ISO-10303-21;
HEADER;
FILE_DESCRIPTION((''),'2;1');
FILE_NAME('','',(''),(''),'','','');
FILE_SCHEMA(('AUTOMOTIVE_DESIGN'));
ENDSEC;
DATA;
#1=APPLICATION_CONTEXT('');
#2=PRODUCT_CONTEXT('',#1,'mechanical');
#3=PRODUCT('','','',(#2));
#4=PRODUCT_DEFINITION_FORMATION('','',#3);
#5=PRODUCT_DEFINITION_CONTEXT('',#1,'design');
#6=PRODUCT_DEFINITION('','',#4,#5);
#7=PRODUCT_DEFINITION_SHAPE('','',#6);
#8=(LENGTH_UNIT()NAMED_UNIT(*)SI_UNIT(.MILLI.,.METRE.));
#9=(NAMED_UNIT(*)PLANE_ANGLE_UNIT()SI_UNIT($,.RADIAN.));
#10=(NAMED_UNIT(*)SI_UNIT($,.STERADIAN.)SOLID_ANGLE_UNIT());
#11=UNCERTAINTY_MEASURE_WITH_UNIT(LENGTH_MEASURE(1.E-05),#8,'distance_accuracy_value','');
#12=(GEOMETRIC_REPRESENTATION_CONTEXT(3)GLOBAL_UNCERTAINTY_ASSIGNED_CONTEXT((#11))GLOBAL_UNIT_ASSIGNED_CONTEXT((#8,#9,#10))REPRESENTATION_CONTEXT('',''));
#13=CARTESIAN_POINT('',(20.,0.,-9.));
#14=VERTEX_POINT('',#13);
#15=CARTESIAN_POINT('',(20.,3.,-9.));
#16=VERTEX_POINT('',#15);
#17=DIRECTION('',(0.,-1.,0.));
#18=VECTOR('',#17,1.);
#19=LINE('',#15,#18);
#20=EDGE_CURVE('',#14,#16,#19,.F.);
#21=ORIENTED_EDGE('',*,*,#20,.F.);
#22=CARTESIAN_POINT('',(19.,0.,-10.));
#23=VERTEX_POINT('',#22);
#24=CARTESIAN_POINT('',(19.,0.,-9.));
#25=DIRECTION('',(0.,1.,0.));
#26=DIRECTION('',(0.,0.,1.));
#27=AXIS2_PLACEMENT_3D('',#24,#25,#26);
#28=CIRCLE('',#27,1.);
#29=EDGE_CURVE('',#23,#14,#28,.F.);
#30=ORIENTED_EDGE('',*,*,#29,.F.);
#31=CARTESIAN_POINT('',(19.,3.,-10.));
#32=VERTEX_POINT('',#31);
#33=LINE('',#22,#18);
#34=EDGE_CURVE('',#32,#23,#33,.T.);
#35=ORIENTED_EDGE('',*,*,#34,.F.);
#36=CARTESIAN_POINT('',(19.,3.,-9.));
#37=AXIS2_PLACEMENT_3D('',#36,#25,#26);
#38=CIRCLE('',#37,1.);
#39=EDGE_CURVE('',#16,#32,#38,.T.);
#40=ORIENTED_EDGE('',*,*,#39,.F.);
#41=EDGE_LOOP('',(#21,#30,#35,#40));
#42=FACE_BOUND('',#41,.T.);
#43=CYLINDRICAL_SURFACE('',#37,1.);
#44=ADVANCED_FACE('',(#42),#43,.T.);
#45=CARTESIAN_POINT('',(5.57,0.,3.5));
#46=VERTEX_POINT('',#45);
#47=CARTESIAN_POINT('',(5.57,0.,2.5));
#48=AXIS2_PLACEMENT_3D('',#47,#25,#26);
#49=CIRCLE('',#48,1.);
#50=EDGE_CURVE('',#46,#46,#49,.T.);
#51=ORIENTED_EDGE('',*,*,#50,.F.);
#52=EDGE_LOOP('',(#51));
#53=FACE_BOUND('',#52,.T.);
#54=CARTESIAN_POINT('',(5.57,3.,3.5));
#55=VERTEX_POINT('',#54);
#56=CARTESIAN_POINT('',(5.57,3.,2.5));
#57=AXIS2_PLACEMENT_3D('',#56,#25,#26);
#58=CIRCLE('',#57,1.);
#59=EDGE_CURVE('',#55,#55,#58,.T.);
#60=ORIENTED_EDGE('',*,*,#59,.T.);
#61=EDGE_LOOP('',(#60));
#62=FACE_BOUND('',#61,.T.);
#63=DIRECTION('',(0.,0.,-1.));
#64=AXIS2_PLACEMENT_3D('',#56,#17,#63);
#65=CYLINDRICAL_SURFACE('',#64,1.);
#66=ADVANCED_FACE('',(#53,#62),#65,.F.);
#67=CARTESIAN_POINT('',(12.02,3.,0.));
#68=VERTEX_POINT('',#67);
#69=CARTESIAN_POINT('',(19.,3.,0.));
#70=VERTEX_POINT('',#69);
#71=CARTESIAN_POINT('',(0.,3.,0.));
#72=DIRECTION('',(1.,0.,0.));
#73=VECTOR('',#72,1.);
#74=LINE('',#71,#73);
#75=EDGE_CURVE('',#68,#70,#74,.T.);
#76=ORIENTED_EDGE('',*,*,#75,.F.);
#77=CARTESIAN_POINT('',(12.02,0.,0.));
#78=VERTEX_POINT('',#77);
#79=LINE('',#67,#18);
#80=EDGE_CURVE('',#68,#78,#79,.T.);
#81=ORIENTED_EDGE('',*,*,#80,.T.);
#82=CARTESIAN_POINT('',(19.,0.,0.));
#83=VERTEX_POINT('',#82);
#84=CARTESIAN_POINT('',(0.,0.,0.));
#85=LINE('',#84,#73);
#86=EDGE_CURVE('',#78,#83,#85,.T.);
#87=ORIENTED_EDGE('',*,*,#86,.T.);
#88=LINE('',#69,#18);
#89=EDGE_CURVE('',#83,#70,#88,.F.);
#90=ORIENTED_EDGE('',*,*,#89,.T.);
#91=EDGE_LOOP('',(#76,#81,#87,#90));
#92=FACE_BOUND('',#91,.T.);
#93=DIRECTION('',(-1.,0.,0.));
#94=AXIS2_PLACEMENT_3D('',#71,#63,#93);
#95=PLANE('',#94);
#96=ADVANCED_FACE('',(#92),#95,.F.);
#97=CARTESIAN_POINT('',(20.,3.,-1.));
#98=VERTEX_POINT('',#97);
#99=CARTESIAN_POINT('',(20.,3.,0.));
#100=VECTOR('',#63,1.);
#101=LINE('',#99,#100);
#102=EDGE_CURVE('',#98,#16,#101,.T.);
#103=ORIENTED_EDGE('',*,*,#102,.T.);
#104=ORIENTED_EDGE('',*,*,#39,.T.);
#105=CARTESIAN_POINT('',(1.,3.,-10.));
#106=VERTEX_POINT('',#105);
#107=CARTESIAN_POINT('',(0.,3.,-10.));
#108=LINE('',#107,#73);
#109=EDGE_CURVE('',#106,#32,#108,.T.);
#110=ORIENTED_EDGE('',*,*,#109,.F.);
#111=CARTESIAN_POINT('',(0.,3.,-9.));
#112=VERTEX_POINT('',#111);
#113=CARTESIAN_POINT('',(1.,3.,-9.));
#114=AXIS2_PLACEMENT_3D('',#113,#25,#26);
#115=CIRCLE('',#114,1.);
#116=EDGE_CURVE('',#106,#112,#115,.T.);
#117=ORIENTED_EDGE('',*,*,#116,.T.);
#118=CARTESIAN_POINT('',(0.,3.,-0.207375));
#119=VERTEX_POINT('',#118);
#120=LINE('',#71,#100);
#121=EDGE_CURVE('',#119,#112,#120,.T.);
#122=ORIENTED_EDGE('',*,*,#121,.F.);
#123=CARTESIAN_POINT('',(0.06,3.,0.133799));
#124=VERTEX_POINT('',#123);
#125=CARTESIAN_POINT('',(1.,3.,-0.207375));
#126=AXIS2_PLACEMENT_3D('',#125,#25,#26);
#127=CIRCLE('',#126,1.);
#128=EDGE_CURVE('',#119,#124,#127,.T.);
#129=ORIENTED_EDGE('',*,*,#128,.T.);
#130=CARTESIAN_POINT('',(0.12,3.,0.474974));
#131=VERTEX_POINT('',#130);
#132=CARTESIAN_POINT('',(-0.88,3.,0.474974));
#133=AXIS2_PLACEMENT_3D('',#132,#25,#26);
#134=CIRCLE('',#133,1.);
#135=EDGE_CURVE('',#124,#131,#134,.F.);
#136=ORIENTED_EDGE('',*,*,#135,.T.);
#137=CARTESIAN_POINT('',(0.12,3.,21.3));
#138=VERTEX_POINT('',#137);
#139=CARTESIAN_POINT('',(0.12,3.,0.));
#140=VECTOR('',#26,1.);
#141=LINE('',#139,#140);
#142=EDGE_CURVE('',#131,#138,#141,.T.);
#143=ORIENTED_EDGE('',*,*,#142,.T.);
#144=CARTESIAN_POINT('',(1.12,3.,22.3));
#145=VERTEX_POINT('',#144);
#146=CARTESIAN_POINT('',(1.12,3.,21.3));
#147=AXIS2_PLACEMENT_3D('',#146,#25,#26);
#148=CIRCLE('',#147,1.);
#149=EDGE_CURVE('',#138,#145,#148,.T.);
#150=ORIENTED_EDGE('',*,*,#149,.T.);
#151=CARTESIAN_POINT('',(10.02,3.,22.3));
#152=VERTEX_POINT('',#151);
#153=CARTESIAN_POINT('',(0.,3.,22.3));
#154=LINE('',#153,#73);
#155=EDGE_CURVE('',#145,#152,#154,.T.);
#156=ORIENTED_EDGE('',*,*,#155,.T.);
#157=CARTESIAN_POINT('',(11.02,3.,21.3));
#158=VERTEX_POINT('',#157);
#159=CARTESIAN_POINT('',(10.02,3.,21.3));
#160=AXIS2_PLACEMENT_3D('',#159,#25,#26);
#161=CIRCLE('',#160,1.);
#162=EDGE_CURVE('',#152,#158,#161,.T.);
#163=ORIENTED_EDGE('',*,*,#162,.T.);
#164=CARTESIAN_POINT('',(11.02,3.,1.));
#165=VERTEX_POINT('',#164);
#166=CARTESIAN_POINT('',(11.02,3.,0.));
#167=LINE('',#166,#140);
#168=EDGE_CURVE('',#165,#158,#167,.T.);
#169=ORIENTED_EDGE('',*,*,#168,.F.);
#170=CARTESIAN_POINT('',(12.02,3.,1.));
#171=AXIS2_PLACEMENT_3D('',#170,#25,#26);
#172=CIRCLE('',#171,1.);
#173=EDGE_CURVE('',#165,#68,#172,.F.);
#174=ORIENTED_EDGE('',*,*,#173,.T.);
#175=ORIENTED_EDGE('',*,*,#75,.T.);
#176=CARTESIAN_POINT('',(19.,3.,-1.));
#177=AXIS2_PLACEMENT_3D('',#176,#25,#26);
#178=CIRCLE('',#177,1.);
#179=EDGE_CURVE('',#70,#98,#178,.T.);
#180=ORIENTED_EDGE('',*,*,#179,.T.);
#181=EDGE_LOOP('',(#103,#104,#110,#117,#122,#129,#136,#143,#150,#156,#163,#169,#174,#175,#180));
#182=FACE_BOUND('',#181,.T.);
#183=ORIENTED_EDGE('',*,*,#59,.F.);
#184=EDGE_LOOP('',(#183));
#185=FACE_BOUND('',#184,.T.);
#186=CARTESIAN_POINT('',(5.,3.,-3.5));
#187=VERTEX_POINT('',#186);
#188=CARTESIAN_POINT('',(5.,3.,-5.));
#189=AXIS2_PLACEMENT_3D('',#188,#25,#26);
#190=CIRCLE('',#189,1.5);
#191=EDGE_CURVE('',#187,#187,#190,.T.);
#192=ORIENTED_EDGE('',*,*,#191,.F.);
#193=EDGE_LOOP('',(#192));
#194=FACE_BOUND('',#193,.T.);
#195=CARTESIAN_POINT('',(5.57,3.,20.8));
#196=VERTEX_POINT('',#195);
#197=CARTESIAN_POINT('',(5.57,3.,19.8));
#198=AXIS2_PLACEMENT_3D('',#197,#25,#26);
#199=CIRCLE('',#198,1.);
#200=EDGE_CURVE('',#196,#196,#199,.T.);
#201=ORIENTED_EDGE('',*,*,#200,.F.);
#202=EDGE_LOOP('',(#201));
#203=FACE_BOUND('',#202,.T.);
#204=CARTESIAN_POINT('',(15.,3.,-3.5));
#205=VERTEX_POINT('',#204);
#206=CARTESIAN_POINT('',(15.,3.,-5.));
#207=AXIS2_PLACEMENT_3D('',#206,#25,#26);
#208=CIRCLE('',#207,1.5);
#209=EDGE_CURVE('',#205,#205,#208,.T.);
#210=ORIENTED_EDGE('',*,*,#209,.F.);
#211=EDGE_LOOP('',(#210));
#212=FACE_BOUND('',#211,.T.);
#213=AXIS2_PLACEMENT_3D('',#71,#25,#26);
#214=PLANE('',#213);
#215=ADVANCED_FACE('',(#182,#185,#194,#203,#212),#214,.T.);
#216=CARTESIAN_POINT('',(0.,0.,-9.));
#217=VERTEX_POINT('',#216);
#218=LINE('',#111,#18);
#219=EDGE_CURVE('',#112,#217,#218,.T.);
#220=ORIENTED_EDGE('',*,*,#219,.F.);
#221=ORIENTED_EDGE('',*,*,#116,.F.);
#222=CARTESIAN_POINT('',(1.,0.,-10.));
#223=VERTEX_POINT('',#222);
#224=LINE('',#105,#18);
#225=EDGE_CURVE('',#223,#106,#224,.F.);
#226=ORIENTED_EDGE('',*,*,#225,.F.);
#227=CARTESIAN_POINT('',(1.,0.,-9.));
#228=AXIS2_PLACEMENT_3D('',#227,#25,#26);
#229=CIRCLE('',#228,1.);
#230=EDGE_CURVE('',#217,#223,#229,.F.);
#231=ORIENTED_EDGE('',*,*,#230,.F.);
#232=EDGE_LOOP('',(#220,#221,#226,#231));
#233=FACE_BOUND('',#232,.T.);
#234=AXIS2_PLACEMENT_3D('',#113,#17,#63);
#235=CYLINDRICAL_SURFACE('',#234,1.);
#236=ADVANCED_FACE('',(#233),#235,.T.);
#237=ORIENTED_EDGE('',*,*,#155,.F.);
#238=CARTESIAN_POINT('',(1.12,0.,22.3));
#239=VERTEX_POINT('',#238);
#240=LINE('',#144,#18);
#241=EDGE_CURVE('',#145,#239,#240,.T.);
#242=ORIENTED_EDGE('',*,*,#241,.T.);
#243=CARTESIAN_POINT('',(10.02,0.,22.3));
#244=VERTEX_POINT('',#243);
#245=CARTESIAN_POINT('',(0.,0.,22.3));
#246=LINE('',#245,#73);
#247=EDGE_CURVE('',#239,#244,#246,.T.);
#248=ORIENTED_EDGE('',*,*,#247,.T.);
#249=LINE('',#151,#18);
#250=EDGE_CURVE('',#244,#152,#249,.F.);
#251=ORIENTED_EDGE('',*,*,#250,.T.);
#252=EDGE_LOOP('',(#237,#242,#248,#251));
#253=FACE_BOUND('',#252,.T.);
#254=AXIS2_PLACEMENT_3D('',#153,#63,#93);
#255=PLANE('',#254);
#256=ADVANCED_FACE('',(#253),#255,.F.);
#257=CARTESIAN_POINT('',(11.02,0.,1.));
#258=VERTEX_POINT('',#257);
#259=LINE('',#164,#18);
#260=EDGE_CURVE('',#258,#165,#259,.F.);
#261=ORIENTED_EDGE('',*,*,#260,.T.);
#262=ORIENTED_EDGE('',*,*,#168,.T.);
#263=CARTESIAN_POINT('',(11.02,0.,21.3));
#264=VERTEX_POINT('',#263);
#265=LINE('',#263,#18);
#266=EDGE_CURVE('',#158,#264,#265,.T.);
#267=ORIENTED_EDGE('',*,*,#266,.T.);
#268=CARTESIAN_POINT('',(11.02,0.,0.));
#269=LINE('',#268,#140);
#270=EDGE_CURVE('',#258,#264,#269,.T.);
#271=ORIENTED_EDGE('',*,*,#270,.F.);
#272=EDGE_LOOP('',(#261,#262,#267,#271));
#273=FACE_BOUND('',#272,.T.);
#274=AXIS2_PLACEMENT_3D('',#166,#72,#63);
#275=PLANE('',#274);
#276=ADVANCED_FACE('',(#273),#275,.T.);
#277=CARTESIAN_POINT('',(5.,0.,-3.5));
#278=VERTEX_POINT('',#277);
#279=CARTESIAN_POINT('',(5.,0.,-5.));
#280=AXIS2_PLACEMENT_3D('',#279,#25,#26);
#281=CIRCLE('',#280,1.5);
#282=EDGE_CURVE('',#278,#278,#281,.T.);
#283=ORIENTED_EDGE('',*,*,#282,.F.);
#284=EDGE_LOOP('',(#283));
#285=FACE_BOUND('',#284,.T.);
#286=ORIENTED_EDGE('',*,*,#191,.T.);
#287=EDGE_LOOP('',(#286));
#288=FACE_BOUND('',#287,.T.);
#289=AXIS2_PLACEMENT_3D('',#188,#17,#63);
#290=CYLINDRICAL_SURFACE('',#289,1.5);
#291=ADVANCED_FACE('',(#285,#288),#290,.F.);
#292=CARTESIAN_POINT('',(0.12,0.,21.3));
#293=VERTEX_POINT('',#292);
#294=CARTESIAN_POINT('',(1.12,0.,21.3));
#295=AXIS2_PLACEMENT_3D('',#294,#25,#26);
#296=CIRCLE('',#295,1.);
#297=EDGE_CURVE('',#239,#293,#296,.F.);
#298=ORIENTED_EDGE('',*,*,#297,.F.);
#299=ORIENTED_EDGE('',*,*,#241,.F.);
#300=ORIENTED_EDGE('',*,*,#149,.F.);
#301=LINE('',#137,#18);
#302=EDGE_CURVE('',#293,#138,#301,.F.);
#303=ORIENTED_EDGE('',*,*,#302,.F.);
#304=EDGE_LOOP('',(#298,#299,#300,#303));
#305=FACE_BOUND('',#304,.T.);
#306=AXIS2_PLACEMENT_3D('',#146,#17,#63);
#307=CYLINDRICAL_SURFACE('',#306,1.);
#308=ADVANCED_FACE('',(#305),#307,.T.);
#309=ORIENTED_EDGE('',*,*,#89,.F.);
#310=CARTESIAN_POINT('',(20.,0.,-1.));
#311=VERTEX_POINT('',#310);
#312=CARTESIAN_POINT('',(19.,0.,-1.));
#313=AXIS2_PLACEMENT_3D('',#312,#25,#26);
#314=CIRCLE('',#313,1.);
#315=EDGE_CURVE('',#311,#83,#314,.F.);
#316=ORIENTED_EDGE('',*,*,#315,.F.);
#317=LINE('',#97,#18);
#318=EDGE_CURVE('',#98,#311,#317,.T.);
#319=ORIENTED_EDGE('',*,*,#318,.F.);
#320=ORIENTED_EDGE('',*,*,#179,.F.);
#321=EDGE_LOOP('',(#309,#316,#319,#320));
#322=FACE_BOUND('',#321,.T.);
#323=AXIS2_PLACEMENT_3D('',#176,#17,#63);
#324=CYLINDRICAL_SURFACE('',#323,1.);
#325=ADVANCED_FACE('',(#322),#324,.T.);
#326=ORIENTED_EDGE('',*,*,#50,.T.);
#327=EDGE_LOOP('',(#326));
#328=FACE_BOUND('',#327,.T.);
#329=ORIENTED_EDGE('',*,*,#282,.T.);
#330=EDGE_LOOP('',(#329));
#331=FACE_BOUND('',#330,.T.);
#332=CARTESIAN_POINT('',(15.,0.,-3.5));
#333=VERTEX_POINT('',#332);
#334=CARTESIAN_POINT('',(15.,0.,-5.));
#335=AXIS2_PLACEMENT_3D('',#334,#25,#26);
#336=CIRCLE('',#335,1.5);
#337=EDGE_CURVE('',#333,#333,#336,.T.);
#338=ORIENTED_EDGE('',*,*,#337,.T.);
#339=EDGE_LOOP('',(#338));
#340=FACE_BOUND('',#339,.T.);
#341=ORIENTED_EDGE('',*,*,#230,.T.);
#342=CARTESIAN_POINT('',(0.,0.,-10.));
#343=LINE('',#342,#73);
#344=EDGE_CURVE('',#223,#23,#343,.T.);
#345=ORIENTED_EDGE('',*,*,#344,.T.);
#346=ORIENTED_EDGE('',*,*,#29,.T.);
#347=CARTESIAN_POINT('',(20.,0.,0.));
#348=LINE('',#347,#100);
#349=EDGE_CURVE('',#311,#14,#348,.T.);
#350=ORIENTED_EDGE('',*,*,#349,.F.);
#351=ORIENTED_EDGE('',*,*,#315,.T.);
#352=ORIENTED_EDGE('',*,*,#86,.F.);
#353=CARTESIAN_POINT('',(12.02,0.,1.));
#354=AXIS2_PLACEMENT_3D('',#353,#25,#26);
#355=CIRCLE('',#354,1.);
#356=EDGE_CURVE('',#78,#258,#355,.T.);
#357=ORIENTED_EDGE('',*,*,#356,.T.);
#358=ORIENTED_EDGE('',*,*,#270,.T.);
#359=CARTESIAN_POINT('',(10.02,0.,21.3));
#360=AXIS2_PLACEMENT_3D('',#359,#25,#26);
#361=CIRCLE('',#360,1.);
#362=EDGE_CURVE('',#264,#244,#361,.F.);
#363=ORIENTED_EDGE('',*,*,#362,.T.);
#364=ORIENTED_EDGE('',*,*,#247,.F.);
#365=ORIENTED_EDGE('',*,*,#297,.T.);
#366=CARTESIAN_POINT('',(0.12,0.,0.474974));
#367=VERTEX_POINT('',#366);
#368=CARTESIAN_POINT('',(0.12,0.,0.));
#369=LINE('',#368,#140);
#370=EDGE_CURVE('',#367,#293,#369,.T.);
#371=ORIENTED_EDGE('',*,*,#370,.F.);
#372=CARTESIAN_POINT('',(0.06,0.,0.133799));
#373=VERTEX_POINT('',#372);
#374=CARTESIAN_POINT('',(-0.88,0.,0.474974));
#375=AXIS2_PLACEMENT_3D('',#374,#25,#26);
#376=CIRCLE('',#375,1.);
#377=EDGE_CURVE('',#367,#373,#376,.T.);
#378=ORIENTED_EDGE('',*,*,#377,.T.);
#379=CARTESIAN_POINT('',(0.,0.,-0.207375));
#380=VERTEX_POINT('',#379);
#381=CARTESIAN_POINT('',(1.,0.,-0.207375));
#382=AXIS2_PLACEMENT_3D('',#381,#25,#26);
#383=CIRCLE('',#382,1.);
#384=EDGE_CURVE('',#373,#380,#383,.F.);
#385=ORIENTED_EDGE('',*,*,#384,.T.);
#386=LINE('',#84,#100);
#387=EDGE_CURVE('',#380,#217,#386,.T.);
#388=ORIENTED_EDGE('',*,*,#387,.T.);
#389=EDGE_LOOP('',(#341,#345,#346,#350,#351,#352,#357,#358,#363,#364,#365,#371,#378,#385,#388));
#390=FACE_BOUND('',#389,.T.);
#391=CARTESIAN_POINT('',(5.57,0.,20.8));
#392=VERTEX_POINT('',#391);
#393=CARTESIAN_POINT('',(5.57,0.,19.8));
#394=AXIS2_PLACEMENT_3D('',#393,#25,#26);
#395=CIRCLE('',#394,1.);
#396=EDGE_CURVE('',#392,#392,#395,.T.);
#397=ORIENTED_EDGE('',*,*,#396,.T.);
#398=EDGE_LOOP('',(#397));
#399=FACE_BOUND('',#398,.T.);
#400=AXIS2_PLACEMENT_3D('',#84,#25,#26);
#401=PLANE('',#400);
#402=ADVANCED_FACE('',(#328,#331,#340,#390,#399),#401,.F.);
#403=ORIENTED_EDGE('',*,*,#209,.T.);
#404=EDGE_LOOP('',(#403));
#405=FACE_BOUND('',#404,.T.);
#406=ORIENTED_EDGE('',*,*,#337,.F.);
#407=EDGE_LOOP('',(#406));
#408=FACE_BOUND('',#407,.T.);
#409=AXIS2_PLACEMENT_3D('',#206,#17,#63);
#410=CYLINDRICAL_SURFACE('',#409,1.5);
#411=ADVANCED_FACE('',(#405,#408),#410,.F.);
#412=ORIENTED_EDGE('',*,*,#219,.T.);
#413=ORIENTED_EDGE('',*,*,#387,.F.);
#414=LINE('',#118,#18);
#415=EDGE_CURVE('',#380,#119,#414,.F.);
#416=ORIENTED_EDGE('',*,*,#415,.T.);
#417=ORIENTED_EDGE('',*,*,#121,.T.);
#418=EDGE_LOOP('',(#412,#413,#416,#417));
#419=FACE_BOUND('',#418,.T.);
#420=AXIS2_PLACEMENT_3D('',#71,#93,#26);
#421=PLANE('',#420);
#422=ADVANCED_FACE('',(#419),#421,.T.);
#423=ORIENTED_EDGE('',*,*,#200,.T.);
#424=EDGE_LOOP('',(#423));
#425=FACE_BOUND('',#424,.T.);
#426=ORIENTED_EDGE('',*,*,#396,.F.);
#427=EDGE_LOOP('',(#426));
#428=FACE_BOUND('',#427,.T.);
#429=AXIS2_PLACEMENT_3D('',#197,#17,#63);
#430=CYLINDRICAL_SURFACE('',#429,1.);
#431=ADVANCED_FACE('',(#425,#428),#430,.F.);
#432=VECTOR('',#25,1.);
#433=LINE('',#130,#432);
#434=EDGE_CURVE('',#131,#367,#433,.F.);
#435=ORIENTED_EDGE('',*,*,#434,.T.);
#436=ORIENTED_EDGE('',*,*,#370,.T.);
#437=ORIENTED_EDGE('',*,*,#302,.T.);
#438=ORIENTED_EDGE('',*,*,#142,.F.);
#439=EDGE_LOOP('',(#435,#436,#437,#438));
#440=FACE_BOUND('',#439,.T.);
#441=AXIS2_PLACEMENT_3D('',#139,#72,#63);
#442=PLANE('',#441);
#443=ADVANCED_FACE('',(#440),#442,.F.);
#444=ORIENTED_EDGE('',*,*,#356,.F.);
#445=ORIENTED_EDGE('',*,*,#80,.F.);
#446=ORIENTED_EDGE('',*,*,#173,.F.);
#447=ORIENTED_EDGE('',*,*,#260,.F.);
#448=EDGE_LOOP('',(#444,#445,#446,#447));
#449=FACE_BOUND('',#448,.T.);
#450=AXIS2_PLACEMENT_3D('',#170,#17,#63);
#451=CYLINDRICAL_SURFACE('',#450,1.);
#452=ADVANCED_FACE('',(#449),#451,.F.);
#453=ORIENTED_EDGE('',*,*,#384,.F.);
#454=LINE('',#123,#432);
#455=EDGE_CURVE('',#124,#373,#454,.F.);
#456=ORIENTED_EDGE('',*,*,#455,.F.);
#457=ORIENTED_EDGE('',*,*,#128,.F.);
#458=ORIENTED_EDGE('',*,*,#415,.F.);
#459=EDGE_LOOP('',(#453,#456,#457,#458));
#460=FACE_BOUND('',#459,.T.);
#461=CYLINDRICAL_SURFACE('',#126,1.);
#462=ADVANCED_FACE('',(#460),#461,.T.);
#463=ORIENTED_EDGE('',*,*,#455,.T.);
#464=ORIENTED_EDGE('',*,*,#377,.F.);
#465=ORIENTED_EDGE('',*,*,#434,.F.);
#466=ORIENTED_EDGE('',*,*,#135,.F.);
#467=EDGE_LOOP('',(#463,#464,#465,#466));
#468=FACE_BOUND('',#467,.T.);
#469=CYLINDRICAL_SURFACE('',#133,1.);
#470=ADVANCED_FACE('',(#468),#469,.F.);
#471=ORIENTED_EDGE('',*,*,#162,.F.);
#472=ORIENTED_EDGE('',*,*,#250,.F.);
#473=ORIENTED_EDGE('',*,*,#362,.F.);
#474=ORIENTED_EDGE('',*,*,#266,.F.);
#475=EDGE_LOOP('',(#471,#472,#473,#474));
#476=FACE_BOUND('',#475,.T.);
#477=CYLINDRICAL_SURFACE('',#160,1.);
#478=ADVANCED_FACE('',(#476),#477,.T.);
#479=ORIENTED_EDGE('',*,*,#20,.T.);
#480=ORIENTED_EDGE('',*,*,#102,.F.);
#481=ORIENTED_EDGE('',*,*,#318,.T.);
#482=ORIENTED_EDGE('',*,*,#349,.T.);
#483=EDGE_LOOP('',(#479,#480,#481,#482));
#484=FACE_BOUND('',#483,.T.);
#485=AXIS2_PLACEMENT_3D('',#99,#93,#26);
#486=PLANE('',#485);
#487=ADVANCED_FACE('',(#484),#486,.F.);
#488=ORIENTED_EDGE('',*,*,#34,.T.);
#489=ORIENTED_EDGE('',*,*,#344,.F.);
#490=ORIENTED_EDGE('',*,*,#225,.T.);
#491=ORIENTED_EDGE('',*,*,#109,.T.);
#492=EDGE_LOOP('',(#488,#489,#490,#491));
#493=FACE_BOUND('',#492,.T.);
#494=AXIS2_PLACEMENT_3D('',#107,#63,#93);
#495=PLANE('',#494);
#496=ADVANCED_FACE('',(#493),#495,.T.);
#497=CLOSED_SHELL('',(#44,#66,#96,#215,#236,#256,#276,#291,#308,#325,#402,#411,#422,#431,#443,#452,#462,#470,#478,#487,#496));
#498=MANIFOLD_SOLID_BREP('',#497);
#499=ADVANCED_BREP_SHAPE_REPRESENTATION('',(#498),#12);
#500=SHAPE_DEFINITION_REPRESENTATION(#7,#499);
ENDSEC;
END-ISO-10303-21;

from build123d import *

# Parameters (mm, degrees)
SKETCH1_R           = 1.5
SKETCH1_R_2         = 1
BOSS_EXTRUDE1_DEPTH = 3
FILLET2_R           = 1
FILLET5_R           = 1
FILLET6_R           = 1


with BuildPart() as part:
    # Sketch1 → Boss-Extrude1 (new body)
    with BuildSketch(Plane(origin=(0, 0, 0), x_dir=(1, 0, 0), z_dir=(0, 1, 0))):
        Polygon((11.02, 0), (20, 0), (20, 10), (0, 10), (0, 0), (0.12, 0), (0.12, -22.3), (11.02, -22.3), align=None)
        with Locations(Location((5, 5, 0), (0, 0, 270))):
            Circle(SKETCH1_R, mode=Mode.SUBTRACT)
        with Locations(Location((15, 5, 0), (0, 0, 270))):
            Circle(SKETCH1_R, mode=Mode.SUBTRACT)
        with Locations(Location((5.57, -2.5, 0), (0, 0, 270))):
            Circle(SKETCH1_R_2, mode=Mode.SUBTRACT)
        with Locations(Location((5.57, -19.8, 0), (0, 0, 270))):
            Circle(SKETCH1_R_2, mode=Mode.SUBTRACT)
    extrude(amount=BOSS_EXTRUDE1_DEPTH)

    # Fillet2
    fillet2_edges = [part.edges().sort_by_distance(p)[0] for p in [
        (11.02, 1.5, 22.3),
        (0.12, 1.5, 22.3),
        (0, 1.5, -10),
        (20, 1.5, -10),
        (20, 1.5, 0),
        (11.02, 1.5, 0),
    ]]
    fillet(fillet2_edges, radius=FILLET2_R)

    # Fillet5
    # the kernel refuses this fillet: 1 mm, written as the material it adds along each edge
    with BuildSketch(Plane(origin=(0.12, 0, 0), x_dir=(0, 0, 1), z_dir=(0, 1, 0))) as fillet5_piece_1:
        with BuildLine():
            CenterArc((0.474973683, -1), FILLET5_R, 90, 28.357636576)
            Line((0, -0.12), (-0.009499474, -0.1024))
            ThreePointArc((-0.009499474, -0.1024), (-0.02, -0.06), (-0.02, 0))
            Line((-0.02, 0), (0, 0.02))
            Line((0, 0.02), (0.474973683, 0.02))
            Line((0.474973683, 0.02), (0.474973683, 0))
        make_face()
    extrude(amount=3)

    # Fillet6
    fillet6_edges = [part.edges().sort_by_distance(p)[0] for p in [
        (0, 1.5, 0),
    ]]
    fillet(fillet6_edges, radius=FILLET6_R)


solid = part.part
